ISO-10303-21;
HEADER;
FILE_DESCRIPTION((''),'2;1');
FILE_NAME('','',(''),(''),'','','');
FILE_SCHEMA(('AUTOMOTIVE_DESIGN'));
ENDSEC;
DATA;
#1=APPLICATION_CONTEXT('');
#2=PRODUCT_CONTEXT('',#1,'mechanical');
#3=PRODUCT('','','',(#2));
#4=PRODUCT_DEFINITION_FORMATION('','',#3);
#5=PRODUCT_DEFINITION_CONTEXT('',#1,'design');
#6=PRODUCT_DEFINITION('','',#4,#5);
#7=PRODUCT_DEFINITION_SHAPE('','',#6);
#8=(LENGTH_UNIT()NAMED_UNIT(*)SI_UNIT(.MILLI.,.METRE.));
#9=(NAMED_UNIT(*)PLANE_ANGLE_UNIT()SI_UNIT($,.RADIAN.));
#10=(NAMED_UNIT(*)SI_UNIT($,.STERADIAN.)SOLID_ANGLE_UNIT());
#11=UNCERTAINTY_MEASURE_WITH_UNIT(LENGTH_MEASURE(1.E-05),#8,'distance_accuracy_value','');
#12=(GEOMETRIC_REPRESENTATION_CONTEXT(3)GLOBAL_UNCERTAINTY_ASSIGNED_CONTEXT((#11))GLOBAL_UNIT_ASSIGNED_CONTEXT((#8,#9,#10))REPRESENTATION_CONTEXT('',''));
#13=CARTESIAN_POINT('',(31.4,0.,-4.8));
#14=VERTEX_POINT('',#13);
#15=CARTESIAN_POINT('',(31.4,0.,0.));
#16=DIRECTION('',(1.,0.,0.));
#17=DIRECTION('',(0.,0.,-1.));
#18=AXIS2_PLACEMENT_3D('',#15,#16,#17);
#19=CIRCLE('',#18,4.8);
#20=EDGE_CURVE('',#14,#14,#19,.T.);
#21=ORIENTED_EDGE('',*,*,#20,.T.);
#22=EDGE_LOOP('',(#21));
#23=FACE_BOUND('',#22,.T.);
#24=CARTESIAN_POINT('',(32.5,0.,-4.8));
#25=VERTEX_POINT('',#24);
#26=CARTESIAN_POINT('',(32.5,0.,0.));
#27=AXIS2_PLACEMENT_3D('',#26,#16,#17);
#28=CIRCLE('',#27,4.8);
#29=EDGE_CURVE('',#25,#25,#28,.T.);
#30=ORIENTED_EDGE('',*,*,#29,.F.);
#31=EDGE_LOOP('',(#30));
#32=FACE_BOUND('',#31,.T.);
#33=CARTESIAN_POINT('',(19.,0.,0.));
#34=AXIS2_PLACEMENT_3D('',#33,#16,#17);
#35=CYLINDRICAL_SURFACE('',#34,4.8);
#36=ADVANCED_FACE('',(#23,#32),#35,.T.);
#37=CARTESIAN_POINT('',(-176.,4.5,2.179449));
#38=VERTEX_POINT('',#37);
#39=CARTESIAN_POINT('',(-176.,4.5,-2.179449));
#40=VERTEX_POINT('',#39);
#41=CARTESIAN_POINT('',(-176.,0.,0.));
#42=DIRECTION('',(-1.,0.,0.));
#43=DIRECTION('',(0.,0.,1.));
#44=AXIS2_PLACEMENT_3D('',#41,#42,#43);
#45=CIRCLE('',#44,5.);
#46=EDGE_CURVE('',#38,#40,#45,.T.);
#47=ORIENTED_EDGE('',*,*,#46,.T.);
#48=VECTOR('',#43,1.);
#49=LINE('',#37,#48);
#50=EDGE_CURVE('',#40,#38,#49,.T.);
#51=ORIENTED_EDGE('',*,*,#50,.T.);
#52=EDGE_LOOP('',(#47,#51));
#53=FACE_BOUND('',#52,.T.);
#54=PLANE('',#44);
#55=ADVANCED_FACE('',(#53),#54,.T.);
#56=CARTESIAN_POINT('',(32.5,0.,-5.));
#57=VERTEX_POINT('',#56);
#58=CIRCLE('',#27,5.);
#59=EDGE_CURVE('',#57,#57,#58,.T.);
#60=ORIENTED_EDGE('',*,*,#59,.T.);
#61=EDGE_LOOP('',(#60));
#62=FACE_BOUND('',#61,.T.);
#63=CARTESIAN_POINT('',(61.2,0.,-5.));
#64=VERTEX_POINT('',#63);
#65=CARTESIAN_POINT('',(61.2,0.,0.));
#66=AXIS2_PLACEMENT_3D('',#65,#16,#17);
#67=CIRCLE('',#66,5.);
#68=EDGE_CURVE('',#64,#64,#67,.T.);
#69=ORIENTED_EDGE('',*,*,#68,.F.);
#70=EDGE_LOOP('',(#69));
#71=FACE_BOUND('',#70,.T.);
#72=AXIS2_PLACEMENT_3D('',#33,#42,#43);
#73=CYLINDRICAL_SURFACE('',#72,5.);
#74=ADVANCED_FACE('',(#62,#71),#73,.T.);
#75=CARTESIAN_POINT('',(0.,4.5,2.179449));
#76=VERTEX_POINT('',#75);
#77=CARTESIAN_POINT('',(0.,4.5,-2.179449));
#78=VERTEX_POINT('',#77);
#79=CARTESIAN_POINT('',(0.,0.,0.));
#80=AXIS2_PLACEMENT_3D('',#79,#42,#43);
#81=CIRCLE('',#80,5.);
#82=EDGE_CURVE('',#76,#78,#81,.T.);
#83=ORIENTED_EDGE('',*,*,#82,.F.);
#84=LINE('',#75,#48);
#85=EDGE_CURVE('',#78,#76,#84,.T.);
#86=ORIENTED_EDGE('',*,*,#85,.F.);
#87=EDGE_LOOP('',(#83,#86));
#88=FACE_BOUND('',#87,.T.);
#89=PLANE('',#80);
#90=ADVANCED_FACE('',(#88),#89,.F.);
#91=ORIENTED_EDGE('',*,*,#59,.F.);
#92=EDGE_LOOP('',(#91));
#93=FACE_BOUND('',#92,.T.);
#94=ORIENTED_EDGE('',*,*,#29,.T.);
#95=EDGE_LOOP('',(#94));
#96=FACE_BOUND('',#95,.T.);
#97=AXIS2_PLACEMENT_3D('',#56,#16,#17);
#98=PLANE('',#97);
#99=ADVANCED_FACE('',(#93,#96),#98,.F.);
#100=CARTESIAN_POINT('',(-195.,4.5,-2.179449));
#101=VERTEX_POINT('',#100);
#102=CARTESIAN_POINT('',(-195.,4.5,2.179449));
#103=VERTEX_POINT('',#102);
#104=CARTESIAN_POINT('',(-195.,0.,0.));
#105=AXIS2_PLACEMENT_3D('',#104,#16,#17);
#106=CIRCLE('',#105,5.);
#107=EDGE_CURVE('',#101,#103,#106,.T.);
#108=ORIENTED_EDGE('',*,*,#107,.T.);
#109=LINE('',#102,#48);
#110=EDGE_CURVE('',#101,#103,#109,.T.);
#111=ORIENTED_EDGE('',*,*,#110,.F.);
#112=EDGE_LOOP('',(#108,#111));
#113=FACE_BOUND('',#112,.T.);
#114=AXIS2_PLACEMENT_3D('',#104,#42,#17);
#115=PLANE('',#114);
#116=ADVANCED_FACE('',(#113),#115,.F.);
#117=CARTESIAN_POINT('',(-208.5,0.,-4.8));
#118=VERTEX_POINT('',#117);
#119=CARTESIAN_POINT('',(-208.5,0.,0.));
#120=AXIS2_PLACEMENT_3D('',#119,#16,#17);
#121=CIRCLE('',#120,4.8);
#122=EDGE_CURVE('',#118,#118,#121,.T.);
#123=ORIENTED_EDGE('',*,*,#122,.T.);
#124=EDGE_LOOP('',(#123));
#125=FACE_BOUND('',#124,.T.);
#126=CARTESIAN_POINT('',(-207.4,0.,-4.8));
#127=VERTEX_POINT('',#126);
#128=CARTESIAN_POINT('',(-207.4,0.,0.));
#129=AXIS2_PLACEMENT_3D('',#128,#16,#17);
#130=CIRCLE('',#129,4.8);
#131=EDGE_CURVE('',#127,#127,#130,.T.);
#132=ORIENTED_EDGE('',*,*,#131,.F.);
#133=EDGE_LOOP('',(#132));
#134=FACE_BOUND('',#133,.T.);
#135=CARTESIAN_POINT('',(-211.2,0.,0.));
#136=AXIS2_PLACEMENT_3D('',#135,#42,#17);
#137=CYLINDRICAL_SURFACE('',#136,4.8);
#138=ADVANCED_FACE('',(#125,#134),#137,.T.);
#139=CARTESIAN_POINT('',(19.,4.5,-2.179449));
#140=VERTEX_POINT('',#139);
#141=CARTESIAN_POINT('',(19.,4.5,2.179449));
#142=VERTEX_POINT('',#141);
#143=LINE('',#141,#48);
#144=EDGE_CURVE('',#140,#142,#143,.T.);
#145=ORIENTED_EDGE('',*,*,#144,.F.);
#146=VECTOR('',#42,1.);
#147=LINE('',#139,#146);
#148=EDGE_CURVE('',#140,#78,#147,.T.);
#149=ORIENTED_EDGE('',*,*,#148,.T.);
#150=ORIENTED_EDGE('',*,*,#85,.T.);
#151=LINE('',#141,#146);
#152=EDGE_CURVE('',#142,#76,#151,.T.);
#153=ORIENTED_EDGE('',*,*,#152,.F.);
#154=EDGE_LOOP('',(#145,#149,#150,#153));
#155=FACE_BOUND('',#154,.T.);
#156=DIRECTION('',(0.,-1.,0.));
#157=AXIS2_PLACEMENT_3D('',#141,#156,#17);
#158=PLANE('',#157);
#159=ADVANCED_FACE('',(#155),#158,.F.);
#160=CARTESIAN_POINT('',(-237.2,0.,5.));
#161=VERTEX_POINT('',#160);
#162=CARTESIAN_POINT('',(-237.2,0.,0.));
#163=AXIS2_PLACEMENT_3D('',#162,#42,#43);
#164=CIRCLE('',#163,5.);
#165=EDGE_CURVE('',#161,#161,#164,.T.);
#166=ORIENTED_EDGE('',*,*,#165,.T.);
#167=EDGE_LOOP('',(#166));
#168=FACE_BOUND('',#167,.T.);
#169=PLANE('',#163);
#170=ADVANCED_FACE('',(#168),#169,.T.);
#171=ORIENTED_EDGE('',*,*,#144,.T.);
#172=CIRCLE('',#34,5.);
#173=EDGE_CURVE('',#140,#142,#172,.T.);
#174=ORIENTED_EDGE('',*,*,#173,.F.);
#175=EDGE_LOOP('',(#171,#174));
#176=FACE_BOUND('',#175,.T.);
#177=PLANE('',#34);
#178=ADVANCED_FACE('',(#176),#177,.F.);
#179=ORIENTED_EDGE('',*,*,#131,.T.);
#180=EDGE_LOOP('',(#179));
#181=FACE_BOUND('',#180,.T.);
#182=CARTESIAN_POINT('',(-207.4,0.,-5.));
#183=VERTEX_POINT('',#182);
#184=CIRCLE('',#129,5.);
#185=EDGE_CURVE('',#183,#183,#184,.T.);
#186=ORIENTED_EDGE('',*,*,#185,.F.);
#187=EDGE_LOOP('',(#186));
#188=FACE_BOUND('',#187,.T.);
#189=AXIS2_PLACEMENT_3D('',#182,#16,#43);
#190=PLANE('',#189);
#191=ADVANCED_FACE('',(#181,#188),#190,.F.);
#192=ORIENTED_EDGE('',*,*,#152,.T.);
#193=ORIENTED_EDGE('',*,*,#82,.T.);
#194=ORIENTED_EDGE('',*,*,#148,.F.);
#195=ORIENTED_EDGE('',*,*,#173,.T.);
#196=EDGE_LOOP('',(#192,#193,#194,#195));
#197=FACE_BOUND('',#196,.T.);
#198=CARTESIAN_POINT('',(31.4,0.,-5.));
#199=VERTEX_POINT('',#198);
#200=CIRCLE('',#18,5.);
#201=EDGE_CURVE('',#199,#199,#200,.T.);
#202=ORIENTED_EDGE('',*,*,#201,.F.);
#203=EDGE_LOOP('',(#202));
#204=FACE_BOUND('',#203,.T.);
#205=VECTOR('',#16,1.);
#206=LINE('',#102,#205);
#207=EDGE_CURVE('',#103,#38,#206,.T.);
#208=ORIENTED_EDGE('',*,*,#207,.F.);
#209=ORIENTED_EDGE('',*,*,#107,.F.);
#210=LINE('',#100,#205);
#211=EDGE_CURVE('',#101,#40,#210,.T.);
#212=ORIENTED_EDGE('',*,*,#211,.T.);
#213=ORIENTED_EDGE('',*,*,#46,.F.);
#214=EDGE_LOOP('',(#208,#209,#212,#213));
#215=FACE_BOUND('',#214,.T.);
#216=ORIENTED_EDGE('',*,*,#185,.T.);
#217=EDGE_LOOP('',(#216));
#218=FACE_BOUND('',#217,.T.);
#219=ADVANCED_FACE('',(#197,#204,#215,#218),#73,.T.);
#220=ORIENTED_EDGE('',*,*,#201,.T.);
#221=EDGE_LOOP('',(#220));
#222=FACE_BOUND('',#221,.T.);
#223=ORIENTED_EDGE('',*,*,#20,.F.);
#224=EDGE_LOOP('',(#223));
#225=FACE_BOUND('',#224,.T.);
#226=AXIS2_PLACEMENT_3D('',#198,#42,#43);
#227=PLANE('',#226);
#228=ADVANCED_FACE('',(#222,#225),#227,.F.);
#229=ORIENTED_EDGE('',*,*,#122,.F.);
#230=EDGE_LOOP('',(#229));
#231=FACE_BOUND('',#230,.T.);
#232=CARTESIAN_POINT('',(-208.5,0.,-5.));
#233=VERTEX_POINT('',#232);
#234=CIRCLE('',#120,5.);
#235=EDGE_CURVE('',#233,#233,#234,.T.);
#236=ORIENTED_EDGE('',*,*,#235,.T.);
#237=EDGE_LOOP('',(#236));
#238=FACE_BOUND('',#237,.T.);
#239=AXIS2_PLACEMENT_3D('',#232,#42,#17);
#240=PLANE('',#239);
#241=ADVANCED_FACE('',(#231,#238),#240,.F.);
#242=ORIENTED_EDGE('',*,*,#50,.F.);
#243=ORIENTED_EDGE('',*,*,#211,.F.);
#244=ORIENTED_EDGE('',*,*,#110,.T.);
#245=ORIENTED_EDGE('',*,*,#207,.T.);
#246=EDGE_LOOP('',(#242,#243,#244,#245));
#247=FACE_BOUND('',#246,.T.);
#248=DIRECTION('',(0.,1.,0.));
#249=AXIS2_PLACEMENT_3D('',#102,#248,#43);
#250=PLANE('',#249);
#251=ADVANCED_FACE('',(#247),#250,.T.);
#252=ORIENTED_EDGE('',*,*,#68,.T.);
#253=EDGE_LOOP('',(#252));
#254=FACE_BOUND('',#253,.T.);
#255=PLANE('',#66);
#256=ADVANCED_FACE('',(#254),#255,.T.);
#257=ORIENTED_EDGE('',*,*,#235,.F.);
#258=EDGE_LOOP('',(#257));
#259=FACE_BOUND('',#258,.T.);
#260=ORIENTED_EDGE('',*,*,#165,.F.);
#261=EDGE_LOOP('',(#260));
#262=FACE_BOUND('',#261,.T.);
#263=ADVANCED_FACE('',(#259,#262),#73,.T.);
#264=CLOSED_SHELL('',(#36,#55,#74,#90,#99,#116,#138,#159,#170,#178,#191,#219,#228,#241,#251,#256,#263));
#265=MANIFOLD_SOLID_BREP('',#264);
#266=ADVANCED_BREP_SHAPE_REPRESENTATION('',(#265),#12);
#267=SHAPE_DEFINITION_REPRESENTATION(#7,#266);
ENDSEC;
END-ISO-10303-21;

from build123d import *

# Parameters (mm, degrees)
EXTRUDE_1_DEPTH = 19
SKETCH_2_R      = 5
EXTRUDE_2_DEPTH = 16.2
SKETCH_5_W      = 1.1
SKETCH_5_H      = 0.2
EXTRUDE_START   = 176
SKETCH_4_R      = 5
EXTRUDE_4_DEPTH = 176
SKETCH_6_R      = 5
EXTRUDE_5_DEPTH = 26
EXTRUDE_START_2 = 26
SKETCH_7_R      = 5
EXTRUDE_6_DEPTH = 26


with BuildPart() as part:
    # 草图1 → 拉伸1 (new body)
    with BuildSketch(Plane(origin=(0, 0, 0), x_dir=(0, 0, -1), z_dir=(1, 0, 0))):
        with BuildLine():
            Line((-2.179449472, 4.5), (2.179449472, 4.5))
            ThreePointArc((2.179449472, 4.5), (0, -5), (-2.179449472, 4.5))
        make_face()
    extrude_1 = extrude(amount=EXTRUDE_1_DEPTH)

    # 草图2 → 拉伸2 (add)
    with BuildSketch(Plane(origin=(19, 0, 0), x_dir=(0, 0, -1), z_dir=(1, 0, 0))):
        Circle(SKETCH_2_R)
    extrude_2 = extrude(amount=EXTRUDE_2_DEPTH)

    # 草图5 → 切除-旋转1 (revolve, cut)
    with BuildSketch(Plane(origin=(0, 0, 0), x_dir=(1, 0, 0), z_dir=(0, 1, 0))):
        with Locations((31.95, 4.9)):
            Rectangle(SKETCH_5_W, SKETCH_5_H)
    cut_revolve_1 = revolve(axis=Axis((19, 0, 0), (-1, 0, 0)), mode=Mode.SUBTRACT)

    # 草图4 → 拉伸4 (add)
    with BuildSketch(Plane.ZY.offset(EXTRUDE_START)):
        Circle(SKETCH_4_R)
    extrude(amount=-EXTRUDE_4_DEPTH)

    # 镜向1: 拉伸1, 拉伸2, 切除-旋转1 across plane
    add(extrude_1.mirror(Plane.ZY.offset(88)))
    add(extrude_2.mirror(Plane.ZY.offset(88)))
    add(cut_revolve_1.mirror(Plane.ZY.offset(88)), mode=Mode.SUBTRACT)

    # 草图6 → 拉伸5 (add)
    with BuildSketch(Plane(origin=(35.2, 0, 0), x_dir=(0, 0, -1), z_dir=(1, 0, 0))):
        Circle(SKETCH_6_R)
    extrude(amount=EXTRUDE_5_DEPTH)

    # 草图7 → 拉伸6 (add)
    with BuildSketch(Plane.ZY.offset(211.2).offset(EXTRUDE_START_2)):
        Circle(SKETCH_7_R)
    extrude(amount=-EXTRUDE_6_DEPTH)


solid = part.part
